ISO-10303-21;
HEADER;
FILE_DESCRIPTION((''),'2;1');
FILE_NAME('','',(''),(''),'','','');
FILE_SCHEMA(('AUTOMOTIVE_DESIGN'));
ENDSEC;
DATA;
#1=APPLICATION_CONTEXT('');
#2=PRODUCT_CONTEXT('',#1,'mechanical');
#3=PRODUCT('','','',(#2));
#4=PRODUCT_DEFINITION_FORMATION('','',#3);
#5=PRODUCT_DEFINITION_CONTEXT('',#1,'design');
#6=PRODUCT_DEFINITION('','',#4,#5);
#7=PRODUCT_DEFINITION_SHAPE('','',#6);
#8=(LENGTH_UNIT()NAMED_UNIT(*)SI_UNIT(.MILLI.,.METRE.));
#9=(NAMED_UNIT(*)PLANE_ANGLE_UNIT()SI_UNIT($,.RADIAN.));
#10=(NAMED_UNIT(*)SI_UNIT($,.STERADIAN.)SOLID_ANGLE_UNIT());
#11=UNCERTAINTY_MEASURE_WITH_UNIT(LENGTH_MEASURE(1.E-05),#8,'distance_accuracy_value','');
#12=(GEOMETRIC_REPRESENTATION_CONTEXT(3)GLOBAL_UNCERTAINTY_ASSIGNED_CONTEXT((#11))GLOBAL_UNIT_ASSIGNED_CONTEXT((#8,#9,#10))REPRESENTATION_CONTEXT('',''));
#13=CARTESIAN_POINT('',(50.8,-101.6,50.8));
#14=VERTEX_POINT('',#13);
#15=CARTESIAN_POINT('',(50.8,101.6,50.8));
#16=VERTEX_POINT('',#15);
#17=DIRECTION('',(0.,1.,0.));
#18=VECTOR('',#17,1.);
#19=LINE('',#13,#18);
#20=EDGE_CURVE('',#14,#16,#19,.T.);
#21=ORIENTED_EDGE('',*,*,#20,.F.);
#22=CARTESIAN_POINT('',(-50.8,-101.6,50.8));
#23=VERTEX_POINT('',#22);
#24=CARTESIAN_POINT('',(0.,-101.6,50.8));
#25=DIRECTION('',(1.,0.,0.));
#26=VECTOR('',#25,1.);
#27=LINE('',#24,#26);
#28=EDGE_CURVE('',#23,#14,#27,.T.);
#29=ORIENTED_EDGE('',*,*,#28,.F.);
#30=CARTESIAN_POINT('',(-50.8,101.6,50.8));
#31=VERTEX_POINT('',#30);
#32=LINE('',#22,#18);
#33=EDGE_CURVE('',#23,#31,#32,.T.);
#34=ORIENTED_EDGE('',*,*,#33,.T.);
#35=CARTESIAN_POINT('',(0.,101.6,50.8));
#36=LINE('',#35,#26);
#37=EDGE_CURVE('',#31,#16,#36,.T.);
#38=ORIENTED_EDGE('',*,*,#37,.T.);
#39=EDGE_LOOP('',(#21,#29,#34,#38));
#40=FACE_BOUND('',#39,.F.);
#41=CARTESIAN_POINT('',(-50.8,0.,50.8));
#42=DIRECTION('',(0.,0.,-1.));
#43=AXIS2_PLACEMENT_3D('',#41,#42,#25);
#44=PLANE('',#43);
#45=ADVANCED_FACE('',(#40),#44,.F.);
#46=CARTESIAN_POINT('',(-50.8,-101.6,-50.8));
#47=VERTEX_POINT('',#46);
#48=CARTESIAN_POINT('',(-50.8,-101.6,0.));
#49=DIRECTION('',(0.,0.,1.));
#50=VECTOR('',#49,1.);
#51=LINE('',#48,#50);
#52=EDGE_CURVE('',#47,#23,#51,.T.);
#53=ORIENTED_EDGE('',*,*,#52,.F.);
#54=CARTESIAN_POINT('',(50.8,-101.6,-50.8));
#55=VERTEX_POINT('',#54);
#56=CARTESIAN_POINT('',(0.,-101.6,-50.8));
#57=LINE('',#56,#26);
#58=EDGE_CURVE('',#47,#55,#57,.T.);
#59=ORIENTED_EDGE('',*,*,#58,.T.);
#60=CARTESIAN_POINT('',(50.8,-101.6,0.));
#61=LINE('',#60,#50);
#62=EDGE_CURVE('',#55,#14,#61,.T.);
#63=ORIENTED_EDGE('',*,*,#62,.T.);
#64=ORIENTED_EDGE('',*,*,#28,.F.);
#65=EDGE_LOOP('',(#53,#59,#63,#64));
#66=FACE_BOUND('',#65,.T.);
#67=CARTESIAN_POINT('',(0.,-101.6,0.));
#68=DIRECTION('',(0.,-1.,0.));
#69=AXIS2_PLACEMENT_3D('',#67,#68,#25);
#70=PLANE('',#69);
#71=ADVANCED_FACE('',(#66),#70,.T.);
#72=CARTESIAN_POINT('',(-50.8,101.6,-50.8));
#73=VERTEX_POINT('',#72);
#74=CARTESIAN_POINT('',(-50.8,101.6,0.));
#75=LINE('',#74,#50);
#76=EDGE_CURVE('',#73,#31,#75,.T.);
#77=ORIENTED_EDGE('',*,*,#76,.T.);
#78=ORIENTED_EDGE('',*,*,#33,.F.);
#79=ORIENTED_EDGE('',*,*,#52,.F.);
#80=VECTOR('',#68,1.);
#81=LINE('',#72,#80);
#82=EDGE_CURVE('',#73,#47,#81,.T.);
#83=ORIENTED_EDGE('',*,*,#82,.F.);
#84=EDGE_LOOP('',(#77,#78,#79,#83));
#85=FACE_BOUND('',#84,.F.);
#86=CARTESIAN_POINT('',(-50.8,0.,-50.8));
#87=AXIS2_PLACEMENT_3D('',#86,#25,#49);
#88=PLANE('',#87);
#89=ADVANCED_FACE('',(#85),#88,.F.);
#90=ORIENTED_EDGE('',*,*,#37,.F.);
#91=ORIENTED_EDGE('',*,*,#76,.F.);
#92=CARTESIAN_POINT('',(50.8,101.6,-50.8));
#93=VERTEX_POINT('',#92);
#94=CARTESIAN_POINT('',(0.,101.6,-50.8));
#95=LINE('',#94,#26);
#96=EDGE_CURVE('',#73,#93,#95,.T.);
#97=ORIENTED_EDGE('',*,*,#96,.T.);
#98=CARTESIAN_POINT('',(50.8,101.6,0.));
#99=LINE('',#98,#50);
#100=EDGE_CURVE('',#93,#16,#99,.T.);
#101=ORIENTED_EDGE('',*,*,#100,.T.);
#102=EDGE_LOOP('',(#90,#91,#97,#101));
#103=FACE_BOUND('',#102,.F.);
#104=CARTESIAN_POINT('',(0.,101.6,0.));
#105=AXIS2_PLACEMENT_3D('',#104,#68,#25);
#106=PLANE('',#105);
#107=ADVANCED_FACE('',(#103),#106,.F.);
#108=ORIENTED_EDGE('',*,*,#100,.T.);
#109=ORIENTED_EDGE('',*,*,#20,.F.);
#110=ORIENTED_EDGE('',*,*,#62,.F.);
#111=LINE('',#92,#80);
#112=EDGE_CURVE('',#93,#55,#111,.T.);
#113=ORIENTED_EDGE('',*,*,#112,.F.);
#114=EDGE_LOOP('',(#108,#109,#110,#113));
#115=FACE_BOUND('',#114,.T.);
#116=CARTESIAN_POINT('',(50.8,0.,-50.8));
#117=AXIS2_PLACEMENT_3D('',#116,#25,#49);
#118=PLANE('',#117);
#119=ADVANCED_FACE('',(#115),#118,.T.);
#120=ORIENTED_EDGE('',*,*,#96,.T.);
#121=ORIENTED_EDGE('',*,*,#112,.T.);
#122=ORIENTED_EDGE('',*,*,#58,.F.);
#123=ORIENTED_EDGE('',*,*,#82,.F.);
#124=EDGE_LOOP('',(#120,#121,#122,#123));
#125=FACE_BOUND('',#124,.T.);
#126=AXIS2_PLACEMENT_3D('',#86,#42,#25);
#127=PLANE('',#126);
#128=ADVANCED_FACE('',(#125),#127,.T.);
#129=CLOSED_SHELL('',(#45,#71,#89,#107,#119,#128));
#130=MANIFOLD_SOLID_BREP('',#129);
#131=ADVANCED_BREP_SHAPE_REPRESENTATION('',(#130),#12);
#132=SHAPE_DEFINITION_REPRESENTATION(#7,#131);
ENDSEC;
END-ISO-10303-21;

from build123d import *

# Parameters (mm, degrees)
F1_W     = 101.6
F1_H     = 101.6
F2_DEPTH = 101.6


# Not quite as in the source:
# - a variable given as a bare number and used for a length is read in inches; the dataset says mm whatever the document's units were


with BuildPart() as f2:
    # F1 (on Front) → F2 (new body, symmetric)
    with BuildSketch(Plane.XZ):
        Rectangle(F1_W, F1_H)
    extrude(amount=F2_DEPTH, both=True)


solid = f2.part
